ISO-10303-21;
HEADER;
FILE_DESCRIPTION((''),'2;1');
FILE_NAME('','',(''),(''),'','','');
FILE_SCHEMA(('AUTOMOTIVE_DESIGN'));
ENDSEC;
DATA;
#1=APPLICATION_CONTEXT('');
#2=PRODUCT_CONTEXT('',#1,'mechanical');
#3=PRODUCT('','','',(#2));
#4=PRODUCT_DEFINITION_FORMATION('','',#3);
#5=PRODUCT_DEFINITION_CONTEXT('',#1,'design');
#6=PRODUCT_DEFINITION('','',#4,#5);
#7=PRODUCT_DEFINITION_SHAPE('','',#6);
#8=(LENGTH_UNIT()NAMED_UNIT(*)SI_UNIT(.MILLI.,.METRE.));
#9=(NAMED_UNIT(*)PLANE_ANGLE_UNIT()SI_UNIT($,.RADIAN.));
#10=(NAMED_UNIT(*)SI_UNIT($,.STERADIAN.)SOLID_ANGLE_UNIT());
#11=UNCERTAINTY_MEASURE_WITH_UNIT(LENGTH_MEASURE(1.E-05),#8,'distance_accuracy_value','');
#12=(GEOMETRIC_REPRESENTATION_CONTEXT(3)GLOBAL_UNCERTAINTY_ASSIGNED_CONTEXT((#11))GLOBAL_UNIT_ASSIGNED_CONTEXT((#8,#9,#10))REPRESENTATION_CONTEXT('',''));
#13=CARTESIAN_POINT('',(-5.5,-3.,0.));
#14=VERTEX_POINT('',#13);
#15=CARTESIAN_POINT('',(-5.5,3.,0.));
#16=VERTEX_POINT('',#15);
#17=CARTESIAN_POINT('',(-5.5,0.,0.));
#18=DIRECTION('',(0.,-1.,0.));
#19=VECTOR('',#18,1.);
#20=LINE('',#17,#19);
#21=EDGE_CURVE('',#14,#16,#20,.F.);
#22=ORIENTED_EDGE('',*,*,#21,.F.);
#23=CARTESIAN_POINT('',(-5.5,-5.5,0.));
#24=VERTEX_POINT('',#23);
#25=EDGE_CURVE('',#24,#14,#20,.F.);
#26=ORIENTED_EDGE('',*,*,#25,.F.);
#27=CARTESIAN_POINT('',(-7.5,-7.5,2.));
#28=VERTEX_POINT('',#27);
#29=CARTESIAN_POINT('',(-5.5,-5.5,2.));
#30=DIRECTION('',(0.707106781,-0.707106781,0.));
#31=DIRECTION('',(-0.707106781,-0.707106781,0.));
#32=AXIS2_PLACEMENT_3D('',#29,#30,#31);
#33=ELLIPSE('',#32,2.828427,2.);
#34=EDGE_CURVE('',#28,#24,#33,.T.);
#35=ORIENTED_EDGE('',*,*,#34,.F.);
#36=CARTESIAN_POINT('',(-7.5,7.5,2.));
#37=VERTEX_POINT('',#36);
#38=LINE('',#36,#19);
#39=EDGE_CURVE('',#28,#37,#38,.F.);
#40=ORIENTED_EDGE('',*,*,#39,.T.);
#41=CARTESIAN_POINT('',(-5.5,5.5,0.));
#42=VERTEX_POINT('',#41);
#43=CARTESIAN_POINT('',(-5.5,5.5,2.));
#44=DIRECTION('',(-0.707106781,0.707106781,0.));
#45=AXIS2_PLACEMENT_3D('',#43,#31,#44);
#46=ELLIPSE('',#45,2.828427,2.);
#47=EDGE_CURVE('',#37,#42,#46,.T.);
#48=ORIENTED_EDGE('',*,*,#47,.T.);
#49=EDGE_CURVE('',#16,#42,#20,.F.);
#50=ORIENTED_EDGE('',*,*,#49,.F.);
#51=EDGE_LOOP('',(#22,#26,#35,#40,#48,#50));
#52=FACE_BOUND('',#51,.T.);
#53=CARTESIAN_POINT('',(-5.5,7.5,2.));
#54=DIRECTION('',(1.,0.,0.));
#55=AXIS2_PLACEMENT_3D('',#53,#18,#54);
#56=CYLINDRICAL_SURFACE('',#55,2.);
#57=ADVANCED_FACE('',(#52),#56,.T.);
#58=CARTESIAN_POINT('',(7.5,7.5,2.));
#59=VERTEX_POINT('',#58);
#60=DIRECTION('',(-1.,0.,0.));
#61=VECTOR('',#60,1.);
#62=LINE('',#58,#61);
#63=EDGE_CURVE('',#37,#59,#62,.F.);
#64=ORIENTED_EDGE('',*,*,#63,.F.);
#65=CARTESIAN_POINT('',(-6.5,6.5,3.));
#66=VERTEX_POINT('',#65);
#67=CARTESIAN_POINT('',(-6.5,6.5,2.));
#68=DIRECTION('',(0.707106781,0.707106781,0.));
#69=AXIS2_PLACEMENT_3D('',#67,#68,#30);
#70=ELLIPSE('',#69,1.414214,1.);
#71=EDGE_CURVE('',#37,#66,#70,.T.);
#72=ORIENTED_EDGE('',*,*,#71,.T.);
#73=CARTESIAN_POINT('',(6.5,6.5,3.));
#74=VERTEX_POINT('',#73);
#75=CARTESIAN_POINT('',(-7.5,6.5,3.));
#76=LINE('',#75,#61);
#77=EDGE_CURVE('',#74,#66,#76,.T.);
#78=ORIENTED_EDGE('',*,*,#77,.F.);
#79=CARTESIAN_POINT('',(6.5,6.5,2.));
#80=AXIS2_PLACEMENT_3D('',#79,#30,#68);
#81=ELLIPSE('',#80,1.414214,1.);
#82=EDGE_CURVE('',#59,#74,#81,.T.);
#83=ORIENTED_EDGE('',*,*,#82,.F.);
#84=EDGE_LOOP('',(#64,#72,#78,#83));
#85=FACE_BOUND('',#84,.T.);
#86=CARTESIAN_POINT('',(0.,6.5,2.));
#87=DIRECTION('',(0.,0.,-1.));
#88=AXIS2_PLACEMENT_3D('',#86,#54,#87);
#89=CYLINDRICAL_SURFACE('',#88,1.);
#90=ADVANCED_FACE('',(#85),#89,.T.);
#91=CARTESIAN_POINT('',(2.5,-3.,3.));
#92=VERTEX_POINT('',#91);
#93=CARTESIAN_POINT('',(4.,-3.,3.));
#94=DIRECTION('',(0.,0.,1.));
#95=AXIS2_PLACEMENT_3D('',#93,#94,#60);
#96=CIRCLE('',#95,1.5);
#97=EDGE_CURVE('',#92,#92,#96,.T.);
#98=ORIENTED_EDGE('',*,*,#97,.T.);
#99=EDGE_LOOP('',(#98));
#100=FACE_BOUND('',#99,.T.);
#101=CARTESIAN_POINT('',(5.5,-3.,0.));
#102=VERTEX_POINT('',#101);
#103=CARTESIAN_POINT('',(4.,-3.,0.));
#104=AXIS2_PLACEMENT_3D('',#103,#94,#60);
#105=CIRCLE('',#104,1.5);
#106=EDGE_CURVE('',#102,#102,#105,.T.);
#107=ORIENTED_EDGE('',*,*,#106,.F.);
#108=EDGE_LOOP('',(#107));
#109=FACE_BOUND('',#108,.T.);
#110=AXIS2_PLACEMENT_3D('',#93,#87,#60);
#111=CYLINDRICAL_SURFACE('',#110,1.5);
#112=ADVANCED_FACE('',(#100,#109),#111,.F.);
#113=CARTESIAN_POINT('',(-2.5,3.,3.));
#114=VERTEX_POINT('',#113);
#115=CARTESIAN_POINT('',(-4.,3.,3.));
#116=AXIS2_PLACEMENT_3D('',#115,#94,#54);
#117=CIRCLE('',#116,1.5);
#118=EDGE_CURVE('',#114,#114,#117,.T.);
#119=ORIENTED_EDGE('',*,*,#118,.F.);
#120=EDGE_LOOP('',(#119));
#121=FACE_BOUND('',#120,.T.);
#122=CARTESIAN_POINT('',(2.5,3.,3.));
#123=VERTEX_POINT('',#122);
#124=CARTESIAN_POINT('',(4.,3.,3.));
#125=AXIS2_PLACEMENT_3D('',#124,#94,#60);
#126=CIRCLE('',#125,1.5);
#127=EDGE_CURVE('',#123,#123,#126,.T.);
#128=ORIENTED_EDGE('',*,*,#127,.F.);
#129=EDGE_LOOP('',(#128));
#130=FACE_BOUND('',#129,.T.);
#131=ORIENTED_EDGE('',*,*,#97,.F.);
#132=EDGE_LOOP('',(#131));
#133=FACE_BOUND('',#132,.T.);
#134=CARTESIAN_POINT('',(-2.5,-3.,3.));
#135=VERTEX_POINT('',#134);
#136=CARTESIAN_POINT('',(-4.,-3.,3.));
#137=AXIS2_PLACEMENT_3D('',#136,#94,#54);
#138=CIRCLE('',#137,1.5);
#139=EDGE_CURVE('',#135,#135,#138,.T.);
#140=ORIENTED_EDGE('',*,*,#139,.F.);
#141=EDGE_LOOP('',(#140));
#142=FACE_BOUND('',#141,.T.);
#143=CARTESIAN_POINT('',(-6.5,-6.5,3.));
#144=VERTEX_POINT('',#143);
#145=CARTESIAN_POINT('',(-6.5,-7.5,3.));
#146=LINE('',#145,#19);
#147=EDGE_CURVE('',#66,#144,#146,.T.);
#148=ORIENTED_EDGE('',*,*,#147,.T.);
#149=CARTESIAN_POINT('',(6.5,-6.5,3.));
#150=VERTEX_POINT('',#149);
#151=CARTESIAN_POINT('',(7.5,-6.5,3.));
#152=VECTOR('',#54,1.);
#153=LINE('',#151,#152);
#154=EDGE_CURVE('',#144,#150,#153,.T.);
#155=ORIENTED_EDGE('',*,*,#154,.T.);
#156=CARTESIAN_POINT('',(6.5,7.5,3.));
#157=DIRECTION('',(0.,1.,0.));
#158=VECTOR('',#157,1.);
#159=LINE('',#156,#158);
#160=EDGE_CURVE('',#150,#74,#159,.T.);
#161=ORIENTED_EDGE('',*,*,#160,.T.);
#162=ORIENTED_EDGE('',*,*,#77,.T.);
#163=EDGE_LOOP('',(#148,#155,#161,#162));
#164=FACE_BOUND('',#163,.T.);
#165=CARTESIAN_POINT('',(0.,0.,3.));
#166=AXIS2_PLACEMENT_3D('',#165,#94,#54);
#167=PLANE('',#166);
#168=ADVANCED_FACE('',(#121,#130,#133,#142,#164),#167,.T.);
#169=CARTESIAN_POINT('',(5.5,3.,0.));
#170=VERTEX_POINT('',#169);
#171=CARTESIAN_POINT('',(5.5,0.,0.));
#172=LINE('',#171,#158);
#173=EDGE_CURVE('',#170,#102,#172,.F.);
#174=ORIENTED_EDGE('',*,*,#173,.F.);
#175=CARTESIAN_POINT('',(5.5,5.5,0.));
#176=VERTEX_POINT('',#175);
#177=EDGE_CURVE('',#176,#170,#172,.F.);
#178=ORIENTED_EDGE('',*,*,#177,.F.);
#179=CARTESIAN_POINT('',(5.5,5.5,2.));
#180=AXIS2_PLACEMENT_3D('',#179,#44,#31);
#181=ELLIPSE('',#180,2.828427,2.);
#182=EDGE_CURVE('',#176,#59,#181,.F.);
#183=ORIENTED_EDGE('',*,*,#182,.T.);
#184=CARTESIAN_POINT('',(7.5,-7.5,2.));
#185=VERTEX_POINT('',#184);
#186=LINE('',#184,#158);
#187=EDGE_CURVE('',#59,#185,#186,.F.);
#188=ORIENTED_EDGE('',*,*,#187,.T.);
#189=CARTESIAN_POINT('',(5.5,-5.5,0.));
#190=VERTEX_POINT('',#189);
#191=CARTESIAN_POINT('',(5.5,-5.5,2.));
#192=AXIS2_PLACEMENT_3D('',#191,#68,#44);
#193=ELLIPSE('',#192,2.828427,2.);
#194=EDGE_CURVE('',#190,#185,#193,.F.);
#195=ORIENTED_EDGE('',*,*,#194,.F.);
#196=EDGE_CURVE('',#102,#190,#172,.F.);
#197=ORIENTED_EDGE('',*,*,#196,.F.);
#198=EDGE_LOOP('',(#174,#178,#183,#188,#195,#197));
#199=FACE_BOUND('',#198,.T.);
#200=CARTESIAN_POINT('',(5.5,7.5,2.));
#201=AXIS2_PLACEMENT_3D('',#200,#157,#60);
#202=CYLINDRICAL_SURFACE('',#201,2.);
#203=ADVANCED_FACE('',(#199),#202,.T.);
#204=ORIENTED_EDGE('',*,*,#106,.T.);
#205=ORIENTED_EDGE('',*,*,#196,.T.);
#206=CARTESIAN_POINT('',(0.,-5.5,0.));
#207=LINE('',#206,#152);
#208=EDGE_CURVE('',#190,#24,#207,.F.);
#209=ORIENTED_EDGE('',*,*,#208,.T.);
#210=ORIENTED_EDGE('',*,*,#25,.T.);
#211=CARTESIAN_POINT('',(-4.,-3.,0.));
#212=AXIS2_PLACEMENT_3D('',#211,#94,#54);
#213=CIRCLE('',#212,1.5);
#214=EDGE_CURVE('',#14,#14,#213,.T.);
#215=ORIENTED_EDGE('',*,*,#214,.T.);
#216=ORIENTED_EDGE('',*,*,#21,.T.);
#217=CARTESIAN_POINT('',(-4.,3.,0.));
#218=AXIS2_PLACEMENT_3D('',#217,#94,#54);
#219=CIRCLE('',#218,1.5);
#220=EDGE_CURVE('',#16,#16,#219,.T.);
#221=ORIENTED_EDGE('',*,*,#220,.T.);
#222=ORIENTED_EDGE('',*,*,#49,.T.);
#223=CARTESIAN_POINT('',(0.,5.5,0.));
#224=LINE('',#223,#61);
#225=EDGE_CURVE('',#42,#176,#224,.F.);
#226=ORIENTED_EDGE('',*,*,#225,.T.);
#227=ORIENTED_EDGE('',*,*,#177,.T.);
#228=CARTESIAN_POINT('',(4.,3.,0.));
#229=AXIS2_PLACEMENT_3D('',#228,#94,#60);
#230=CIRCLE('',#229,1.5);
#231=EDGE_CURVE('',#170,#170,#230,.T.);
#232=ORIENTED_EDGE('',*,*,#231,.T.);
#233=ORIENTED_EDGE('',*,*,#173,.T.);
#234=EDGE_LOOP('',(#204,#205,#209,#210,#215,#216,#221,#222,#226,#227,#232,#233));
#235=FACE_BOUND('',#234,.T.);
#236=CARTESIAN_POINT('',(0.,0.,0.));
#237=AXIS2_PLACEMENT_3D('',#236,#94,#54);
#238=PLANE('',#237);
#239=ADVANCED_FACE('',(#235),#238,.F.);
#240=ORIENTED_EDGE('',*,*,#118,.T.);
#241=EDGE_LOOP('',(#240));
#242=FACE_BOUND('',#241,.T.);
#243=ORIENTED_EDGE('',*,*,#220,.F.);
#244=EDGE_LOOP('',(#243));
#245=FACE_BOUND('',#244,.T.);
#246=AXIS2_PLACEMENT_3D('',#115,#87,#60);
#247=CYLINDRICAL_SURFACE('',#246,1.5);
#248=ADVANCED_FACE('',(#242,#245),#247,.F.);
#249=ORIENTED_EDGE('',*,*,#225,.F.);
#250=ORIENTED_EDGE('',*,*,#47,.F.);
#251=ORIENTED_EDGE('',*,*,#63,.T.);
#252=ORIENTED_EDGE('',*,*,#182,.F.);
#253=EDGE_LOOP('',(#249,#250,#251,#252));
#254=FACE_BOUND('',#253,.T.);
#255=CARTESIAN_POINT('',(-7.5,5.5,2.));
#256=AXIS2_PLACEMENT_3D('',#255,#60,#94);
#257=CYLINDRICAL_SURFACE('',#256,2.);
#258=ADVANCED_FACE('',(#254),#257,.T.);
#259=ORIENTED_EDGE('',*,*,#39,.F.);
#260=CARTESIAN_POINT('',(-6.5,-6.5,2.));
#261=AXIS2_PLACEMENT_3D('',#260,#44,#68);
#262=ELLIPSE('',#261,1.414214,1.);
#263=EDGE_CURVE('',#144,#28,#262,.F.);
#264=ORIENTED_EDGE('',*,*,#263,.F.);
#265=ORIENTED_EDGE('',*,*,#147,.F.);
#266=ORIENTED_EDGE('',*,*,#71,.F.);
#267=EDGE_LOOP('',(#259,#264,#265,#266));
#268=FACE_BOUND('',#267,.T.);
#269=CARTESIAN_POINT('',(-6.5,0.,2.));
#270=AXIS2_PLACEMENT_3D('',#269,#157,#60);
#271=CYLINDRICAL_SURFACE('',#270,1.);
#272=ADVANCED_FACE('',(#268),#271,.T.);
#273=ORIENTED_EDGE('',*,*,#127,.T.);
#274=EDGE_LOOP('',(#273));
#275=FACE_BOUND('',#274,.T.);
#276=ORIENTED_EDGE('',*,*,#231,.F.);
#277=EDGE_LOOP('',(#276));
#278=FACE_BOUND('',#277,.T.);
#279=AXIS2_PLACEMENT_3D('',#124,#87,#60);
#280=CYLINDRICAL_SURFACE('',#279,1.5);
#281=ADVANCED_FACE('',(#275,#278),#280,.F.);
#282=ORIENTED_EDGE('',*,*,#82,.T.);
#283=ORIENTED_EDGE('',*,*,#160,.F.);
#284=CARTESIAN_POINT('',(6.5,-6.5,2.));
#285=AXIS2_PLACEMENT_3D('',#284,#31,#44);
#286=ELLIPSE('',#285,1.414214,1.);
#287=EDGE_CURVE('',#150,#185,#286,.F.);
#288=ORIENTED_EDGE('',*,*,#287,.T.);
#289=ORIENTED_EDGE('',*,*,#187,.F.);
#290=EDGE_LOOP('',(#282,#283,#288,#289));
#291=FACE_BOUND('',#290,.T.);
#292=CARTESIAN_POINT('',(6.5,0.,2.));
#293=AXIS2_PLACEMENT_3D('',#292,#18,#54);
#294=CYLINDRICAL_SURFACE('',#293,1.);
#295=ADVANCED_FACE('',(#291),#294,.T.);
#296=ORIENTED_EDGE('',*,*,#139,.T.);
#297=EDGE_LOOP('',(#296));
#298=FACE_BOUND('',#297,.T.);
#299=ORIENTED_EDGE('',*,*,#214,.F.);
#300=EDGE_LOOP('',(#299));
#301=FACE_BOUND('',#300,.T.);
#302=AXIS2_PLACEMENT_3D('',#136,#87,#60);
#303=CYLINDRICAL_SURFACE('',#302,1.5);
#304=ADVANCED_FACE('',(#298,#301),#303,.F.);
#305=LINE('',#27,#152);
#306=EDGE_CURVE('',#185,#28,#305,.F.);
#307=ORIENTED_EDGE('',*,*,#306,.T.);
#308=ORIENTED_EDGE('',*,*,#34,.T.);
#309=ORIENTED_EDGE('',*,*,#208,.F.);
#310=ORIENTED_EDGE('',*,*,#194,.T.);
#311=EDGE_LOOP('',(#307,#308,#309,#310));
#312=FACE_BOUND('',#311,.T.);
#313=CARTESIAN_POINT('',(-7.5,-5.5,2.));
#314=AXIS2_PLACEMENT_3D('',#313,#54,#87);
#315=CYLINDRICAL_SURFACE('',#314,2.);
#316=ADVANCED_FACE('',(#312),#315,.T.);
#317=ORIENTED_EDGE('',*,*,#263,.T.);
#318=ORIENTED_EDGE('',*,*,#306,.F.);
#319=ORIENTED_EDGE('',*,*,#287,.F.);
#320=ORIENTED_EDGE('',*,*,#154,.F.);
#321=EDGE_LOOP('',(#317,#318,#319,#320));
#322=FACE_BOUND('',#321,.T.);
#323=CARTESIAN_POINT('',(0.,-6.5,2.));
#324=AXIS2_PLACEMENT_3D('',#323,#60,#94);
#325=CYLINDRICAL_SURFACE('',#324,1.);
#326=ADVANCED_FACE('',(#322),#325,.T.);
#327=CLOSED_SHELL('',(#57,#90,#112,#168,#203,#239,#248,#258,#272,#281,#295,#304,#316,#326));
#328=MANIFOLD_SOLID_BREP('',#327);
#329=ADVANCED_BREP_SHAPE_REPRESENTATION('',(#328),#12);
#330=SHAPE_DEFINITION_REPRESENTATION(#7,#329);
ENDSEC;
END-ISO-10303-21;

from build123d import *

# Parameters (mm, degrees)
SKETCH1_W           = 15
SKETCH1_H           = 15
SKETCH1_R           = 1.5
BOSS_EXTRUDE1_DEPTH = 3
FILLET3_R           = 1
FILLET4_R           = 2


with BuildPart() as part:
    # Sketch1 → Boss-Extrude1 (new body)
    with BuildSketch(Plane.XY):
        Rectangle(SKETCH1_W, SKETCH1_H)
        with Locations((-4, 3)):
            Circle(SKETCH1_R, mode=Mode.SUBTRACT)
        with Locations((-4, -3)):
            Circle(SKETCH1_R, mode=Mode.SUBTRACT)
        with Locations(Location((4, -3, 0), (0, 0, 180))):
            Circle(SKETCH1_R, mode=Mode.SUBTRACT)
        with Locations(Location((4, 3, 0), (0, 0, 180))):
            Circle(SKETCH1_R, mode=Mode.SUBTRACT)
    extrude(amount=BOSS_EXTRUDE1_DEPTH)

    # Fillet3
    fillet3_edges = [part.edges().sort_by_distance(p)[0] for p in [
        (-7.5, 0, 3),
        (0, -7.5, 3),
        (7.5, 0, 3),
        (0, 7.5, 3),
    ]]
    fillet(fillet3_edges, radius=FILLET3_R)

    # Fillet4
    fillet4_edges = [part.edges().sort_by_distance(p)[0] for p in [
        (0, -7.5, 0),
        (-7.5, 0, 0),
        (7.5, 0, 0),
        (0, 7.5, 0),
    ]]
    fillet(fillet4_edges, radius=FILLET4_R - 0.0001)  # a hair under: the kernel refuses the full size


solid = part.part
